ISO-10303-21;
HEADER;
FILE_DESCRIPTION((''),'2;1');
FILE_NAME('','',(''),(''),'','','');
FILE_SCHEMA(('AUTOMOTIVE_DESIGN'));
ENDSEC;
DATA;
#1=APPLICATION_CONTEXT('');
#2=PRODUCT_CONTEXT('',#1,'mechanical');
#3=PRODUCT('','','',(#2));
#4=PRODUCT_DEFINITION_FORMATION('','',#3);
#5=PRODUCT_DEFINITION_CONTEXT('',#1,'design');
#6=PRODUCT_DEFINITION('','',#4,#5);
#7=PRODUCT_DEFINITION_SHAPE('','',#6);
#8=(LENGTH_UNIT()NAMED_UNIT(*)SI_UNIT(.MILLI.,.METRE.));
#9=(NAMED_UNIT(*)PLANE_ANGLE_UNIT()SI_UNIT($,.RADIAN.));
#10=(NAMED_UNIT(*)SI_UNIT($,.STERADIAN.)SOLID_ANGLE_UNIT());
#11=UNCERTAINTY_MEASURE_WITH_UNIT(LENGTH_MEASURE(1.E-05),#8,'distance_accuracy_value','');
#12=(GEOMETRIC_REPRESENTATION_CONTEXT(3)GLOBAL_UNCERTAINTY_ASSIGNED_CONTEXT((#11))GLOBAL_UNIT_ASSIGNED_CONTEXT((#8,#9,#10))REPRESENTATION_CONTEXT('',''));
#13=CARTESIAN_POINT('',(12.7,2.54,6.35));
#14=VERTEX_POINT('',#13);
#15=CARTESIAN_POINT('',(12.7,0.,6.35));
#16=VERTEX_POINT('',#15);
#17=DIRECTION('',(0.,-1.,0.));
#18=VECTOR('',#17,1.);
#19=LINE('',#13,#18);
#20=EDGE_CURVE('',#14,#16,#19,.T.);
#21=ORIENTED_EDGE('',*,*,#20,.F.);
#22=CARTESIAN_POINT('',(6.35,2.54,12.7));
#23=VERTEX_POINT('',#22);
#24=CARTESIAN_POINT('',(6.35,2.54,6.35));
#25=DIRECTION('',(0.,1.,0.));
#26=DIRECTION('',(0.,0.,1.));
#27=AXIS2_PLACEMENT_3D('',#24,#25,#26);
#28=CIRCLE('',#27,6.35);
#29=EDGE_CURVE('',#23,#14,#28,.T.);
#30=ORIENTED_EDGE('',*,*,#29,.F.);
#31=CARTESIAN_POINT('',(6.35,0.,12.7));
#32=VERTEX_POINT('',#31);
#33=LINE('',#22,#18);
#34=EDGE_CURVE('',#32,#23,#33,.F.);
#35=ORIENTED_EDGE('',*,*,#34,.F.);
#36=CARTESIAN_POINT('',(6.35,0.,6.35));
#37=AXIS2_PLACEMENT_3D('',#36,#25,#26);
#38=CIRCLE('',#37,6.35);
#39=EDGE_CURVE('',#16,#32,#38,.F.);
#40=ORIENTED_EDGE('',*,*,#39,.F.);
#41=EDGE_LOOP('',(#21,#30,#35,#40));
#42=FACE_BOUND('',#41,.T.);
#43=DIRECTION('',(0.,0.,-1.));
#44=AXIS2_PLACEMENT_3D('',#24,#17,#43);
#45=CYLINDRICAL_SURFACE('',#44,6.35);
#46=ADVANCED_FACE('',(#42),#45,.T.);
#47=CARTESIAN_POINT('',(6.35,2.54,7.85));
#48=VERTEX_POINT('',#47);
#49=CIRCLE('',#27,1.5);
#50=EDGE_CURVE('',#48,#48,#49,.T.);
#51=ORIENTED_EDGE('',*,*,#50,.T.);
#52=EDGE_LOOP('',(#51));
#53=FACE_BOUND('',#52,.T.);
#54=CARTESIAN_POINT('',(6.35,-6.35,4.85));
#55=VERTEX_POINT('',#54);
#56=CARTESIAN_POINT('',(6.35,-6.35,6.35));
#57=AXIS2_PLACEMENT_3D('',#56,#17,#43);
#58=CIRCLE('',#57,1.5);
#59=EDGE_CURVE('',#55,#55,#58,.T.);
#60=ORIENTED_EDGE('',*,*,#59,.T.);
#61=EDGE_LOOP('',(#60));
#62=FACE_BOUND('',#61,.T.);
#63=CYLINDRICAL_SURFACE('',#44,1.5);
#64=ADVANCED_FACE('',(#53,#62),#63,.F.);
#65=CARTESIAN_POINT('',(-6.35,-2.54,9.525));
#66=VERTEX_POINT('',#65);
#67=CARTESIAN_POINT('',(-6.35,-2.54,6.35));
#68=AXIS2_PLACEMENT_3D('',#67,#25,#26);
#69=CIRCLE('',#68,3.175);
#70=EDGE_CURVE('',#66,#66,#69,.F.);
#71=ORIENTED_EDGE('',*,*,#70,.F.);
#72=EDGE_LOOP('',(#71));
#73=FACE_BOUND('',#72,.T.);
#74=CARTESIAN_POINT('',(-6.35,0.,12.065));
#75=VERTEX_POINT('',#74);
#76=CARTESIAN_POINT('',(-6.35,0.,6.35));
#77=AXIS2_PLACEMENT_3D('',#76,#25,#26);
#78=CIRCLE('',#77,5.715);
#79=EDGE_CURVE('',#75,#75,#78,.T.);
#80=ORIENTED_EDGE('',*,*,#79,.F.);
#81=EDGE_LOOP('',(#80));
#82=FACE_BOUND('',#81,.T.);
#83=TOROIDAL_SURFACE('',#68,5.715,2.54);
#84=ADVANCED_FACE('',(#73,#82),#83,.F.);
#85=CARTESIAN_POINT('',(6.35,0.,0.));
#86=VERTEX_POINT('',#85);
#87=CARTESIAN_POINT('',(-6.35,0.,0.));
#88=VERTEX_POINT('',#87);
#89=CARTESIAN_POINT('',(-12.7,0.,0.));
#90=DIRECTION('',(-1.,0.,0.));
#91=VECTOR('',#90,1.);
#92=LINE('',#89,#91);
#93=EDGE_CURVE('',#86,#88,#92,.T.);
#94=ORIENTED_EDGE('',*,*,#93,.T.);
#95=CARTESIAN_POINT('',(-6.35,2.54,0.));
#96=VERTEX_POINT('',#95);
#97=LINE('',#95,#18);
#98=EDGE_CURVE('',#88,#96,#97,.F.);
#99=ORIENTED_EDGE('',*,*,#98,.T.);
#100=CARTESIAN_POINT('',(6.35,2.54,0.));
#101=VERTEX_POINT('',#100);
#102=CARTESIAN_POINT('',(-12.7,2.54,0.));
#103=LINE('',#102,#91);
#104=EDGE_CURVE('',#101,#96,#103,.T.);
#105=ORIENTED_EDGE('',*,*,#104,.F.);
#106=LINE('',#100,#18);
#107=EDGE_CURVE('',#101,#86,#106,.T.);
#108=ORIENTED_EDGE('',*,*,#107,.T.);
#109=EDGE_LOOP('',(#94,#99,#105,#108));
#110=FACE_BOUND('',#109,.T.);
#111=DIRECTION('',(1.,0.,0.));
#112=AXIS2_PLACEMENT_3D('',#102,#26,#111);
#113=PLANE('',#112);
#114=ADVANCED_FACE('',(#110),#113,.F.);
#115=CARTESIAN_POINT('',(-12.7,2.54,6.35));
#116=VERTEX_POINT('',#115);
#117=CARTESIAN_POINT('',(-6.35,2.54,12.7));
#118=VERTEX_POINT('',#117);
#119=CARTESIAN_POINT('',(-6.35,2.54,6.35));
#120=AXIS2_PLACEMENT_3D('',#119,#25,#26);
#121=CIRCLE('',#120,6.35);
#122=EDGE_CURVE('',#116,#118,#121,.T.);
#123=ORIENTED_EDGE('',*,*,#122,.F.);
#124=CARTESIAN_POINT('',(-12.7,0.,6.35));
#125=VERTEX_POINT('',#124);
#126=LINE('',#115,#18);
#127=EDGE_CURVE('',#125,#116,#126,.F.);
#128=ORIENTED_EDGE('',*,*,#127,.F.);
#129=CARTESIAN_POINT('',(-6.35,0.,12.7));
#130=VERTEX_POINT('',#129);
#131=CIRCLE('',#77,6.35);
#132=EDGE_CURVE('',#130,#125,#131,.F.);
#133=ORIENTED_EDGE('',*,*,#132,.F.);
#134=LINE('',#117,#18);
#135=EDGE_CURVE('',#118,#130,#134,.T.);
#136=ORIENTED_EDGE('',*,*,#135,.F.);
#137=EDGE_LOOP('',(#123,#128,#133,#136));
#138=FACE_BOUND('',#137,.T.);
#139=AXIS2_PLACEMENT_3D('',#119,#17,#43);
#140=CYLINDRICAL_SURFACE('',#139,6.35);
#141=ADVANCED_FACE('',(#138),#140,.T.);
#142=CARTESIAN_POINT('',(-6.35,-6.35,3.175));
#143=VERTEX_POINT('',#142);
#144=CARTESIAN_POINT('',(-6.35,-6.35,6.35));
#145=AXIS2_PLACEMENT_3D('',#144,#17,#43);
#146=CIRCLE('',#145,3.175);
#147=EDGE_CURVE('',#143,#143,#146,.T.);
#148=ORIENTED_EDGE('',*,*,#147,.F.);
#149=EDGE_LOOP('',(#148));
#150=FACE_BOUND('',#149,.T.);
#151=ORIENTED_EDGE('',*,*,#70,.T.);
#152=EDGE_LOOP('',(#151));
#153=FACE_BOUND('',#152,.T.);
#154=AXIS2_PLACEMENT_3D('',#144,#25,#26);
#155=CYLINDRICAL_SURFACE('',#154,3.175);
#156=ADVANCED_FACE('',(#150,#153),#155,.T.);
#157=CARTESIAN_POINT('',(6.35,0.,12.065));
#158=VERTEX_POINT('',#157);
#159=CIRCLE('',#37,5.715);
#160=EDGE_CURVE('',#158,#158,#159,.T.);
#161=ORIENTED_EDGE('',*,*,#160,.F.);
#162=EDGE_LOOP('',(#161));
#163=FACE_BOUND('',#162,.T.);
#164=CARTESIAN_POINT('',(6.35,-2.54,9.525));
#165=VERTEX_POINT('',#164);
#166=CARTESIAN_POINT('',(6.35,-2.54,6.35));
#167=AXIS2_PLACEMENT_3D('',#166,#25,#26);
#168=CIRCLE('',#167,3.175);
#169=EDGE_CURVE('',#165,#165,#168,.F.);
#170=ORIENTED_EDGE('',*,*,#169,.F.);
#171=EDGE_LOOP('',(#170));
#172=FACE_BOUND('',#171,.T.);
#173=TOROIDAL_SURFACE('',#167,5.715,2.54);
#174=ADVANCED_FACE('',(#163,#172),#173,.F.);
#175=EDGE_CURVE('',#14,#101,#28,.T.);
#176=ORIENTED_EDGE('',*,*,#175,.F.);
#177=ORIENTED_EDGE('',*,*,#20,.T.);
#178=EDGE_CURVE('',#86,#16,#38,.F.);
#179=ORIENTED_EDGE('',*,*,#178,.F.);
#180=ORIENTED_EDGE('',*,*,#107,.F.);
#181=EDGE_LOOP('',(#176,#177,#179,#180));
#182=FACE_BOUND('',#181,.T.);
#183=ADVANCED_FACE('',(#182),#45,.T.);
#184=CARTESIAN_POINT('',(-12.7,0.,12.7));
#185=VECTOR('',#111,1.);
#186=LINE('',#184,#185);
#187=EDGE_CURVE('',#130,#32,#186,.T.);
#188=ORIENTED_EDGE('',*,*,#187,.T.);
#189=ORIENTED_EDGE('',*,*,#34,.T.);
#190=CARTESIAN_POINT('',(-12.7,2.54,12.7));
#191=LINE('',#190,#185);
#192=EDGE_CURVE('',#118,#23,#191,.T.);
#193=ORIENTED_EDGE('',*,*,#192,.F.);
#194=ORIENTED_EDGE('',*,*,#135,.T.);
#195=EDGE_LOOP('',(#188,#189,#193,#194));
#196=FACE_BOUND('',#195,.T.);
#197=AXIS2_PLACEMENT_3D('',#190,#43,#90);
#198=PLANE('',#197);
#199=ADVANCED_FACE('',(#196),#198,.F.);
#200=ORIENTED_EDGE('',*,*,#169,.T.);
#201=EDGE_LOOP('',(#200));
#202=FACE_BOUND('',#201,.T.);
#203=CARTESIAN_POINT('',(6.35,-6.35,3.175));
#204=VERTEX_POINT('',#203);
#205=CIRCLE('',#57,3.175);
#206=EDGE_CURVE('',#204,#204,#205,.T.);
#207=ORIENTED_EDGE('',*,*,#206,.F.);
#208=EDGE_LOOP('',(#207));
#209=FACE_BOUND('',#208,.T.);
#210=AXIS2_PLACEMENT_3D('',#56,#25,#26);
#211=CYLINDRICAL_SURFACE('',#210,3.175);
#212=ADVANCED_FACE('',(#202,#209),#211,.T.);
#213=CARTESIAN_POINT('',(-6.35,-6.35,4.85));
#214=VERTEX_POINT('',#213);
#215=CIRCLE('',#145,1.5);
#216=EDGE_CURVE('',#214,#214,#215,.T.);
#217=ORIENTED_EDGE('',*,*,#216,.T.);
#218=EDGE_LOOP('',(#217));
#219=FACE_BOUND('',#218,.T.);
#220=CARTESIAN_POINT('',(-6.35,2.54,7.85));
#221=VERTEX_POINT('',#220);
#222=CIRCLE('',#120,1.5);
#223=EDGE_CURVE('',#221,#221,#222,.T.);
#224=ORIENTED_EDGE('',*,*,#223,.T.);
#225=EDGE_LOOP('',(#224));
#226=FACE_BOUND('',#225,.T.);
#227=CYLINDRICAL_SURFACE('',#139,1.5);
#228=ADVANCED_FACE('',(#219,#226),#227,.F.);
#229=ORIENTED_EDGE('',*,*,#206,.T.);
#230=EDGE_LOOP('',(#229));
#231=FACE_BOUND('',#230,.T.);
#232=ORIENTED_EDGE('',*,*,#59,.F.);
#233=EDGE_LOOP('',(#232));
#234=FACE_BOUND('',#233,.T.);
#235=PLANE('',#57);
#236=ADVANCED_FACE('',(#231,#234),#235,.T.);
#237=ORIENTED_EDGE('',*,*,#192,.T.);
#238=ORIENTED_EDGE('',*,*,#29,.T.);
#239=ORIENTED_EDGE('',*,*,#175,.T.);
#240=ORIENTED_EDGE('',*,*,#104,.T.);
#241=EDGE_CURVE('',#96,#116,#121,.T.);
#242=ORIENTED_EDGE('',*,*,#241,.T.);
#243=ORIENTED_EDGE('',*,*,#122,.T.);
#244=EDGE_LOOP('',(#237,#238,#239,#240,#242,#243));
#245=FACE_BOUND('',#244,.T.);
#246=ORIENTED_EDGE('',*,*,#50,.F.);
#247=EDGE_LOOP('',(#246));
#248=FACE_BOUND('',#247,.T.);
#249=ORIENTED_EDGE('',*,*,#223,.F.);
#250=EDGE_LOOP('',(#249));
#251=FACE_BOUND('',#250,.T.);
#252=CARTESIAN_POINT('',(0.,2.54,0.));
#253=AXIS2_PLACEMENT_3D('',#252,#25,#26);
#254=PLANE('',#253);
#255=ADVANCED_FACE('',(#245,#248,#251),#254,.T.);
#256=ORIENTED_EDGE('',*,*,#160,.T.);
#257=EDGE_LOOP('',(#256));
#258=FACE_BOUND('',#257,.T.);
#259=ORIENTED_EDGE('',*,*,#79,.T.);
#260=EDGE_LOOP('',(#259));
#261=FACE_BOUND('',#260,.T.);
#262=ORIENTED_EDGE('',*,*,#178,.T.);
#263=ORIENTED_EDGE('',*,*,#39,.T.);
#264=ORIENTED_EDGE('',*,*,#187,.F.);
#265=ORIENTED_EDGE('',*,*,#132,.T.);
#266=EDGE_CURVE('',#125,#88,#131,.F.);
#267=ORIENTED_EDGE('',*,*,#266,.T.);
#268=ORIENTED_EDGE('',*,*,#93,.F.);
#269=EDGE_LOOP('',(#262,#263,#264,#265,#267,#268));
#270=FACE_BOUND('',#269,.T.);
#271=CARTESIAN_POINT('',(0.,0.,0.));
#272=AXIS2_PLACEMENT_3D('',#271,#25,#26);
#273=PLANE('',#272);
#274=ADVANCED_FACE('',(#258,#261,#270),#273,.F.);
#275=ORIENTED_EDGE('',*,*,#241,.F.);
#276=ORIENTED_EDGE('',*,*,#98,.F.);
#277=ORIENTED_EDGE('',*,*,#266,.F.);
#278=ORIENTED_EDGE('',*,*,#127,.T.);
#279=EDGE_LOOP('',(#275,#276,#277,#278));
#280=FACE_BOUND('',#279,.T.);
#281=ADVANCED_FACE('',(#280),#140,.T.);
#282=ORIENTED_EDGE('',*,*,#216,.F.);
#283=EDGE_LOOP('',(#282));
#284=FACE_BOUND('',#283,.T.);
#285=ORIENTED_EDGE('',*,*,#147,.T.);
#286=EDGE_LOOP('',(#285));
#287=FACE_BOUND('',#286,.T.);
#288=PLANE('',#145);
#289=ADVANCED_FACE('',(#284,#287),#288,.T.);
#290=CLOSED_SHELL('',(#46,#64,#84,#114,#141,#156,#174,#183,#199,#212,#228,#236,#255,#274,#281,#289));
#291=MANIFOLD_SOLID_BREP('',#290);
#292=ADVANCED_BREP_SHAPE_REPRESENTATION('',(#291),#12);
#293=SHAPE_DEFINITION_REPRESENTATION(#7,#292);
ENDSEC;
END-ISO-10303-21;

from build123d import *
from build123d.topology import SkipClean

# Parameters (mm, degrees)
SKETCH1_W           = 25.4
SKETCH1_H           = 25.4
SKETCH1_R           = 1.5
BOSS_EXTRUDE1_DEPTH = 2.54
SKETCH3_W           = 25.4
SKETCH3_H           = 12.7
CUT_EXTRUDE1_DEPTH  = 19.139228208
BOSS_EXTRUDE2_START = 6.35
SKETCH4_R           = 3.175
SKETCH4_R_2         = 1.5
BOSS_EXTRUDE2_DEPTH = 6.35
FILLET1_R           = 6.35


with BuildPart() as part:
    # Sketch1 → Boss-Extrude1 (new body)
    with BuildSketch(Plane(origin=(0, 0, 0), x_dir=(1, 0, 0), z_dir=(0, 1, 0))):
        Rectangle(SKETCH1_W, SKETCH1_H)
        with Locations(Location((-6.35, 6.35, 0), (0, 0, 270))):
            Circle(SKETCH1_R, mode=Mode.SUBTRACT)
        with Locations(Location((6.35, 6.35, 0), (0, 0, 270))):
            Circle(SKETCH1_R, mode=Mode.SUBTRACT)
        with Locations(Location((6.35, -6.35, 0), (0, 0, 270))):
            Circle(SKETCH1_R, mode=Mode.SUBTRACT)
        with Locations(Location((-6.35, -6.35, 0), (0, 0, 270))):
            Circle(SKETCH1_R, mode=Mode.SUBTRACT)
    extrude(amount=BOSS_EXTRUDE1_DEPTH)

    # Sketch3 → Cut-Extrude1 (cut, through all)
    with BuildSketch(Plane.XZ):
        with Locations((0, -6.35)):
            Rectangle(SKETCH3_W, SKETCH3_H)
    extrude(amount=-CUT_EXTRUDE1_DEPTH, mode=Mode.SUBTRACT)

    # Sketch4 → Boss-Extrude2 (add)
    # profile 1 of 2: a face of its own
    with SkipClean():  # the faces are left unmerged after this step: merging them gives an invalid solid
        with BuildSketch(Plane.XZ.offset(BOSS_EXTRUDE2_START)):
            with Locations(Location((-6.35, 6.35, 0), (0, 0, 90))):
                Circle(SKETCH4_R)
            with Locations(Location((-6.35, 6.35, 0), (0, 0, 270))):
                Circle(SKETCH4_R_2, mode=Mode.SUBTRACT)
        # profile 2 of 2: a face of its own
        with BuildSketch(Plane.XZ.offset(BOSS_EXTRUDE2_START)):
            with Locations(Location((6.35, 6.35, 0), (0, 0, 90))):
                Circle(SKETCH4_R)
            with Locations(Location((6.35, 6.35, 0), (0, 0, 270))):
                Circle(SKETCH4_R_2, mode=Mode.SUBTRACT)
        extrude(amount=-BOSS_EXTRUDE2_DEPTH)

    # Fillet1
    fillet1_edges = [part.edges().sort_by_distance(p)[0] for p in [
        (12.7, 1.27, 0),
        (-12.7, 1.27, 0),
        (-12.7, 1.27, 12.7),
        (12.7, 1.27, 12.7),
    ]]
    fillet(fillet1_edges, radius=FILLET1_R - 0.0001)  # a hair under: the kernel refuses the full size

    # Fillet2: read off the stored shape, not the designer's step
    # Fillet2 outline → Fillet2 (revolve)
    with BuildSketch(Plane(origin=(6.35, 0, 6.35), x_dir=(1, 0, 0), z_dir=(0, 0, 1))):
        with BuildLine():
            ThreePointArc((3.175, -2.54), (3.918948776, -0.743948776), (5.715, 0))
            Line((5.715, 0), (3.175, 0))
            Line((3.175, 0), (3.175, -2.54))
        make_face()
    revolve(axis=Axis((6.35, 0, 6.35), (0, 1, 0)))

    # Fillet2 2 outline → Fillet2 2 (revolve)
    with BuildSketch(Plane(origin=(-6.35, 0, 6.35), x_dir=(1, 0, 0), z_dir=(0, 0, 1))):
        with BuildLine():
            ThreePointArc((3.175, -2.54), (3.918948776, -0.743948776), (5.715, 0))
            Line((5.715, 0), (3.175, 0))
            Line((3.175, 0), (3.175, -2.54))
        make_face()
    revolve(axis=Axis((-6.35, 0, 6.35), (0, 1, 0)))


solid = part.part
